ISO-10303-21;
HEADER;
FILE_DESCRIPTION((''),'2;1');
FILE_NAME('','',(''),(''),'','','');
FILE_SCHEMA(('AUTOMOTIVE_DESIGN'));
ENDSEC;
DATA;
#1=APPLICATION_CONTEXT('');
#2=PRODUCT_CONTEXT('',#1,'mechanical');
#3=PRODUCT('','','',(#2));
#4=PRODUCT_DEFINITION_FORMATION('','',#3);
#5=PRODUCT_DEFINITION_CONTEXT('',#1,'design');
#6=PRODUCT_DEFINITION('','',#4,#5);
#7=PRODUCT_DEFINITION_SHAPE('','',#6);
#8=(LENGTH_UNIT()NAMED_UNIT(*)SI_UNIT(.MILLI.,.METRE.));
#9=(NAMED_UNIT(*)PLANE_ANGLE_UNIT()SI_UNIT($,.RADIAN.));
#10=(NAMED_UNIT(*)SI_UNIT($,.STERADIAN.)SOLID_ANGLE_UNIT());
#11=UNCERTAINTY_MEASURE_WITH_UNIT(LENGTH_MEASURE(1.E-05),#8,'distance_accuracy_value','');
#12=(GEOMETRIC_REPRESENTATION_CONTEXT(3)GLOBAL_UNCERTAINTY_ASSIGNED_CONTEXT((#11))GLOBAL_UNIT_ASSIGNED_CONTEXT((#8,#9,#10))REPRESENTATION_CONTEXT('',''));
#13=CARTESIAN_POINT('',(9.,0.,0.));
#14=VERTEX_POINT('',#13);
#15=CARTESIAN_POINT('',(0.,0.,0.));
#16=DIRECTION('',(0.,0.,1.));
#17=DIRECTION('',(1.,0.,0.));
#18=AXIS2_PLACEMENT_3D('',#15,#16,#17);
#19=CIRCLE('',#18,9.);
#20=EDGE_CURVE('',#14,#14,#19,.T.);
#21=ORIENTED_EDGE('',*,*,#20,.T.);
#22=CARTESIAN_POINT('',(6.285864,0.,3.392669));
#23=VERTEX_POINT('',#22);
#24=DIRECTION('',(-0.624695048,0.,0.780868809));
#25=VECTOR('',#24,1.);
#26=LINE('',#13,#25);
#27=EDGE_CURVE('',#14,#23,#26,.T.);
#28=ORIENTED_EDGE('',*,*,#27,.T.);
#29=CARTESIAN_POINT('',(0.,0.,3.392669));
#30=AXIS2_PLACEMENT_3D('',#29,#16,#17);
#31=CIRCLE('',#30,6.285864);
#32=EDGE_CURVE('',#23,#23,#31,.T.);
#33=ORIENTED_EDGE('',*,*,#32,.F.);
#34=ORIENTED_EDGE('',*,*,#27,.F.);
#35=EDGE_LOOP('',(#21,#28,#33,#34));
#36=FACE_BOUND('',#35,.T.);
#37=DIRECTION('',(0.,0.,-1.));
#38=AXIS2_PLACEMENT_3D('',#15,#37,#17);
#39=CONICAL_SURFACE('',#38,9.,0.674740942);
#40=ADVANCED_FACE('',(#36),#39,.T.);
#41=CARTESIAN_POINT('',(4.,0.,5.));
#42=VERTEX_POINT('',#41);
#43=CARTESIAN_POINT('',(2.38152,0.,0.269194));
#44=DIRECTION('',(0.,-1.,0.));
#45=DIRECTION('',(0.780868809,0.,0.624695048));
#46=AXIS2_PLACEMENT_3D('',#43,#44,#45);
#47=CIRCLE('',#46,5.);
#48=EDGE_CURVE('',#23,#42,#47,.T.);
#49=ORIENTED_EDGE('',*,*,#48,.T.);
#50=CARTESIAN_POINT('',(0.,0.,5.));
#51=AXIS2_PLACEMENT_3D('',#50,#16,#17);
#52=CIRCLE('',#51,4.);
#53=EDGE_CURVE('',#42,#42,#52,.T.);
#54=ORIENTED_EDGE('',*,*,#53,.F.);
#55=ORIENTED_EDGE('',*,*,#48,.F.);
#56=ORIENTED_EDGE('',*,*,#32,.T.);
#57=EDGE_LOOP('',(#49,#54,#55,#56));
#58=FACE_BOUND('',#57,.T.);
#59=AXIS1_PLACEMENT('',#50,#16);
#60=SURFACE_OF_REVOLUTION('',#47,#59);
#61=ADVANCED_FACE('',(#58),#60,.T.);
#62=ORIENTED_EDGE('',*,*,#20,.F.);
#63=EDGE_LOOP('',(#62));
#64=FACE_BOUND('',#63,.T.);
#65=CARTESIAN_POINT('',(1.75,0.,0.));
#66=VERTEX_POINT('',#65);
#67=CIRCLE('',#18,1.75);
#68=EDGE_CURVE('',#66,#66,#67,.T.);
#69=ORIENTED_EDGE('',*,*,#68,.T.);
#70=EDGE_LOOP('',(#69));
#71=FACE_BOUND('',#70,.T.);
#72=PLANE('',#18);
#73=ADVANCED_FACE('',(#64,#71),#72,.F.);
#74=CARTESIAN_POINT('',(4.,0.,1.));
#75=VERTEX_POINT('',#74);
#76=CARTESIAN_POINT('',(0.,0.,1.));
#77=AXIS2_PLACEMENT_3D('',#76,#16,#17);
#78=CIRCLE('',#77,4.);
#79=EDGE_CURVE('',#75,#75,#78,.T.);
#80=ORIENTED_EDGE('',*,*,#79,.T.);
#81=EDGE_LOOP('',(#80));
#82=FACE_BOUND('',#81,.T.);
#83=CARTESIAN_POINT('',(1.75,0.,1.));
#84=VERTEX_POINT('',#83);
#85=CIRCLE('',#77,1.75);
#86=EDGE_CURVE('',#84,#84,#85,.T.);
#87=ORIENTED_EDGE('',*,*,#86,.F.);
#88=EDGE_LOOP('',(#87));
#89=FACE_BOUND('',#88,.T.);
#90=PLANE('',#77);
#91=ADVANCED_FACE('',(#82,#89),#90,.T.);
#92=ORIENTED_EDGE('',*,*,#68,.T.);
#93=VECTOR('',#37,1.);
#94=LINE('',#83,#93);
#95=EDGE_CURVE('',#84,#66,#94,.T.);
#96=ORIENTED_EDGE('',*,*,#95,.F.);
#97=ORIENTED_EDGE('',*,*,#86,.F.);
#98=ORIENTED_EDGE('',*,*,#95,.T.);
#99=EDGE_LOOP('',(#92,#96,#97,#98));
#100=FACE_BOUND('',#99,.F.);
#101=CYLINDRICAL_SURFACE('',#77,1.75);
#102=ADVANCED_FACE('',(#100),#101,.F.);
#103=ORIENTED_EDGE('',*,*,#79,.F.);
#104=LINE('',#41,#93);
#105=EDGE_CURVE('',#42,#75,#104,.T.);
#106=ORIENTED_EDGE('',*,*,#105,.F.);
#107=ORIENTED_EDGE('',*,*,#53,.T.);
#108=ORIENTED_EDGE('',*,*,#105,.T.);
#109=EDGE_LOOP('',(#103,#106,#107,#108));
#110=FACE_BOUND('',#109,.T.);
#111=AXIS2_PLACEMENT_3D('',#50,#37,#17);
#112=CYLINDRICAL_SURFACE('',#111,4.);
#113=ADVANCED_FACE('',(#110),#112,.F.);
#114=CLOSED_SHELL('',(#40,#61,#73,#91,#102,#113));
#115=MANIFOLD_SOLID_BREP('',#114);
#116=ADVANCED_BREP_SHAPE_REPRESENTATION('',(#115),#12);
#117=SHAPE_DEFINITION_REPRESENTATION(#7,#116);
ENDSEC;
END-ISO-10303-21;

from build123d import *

# Parameters (mm, degrees)
F2_R     = 1.75
F3_DEPTH = 1.001


# Not quite as in the source:
# - a fillet or chamfer that OpenCascade refuses, or shapes differently, is made with other operations: its cross-section is extruded or revolved along the edge and cut away or added


with BuildPart() as f1:
    # F0 (on Front) → F1 (revolve)
    with BuildSketch(Plane.XZ):
        Polygon((0, 1), (0, 0), (9, 0), (5, 5), (4, 5), (4, 1), align=None)
    revolve(axis=Axis((0, 0, 2.5), (0, 0, 1)))

    # F2 (on face) → F3 (cut, through all)
    with BuildSketch(Plane.XY.offset(1)):
        Circle(F2_R)
    extrude(amount=-F3_DEPTH, mode=Mode.SUBTRACT)

    # F4: fillet of radius 5 on 1 edges, made by hand

    # F4_s1 → F4_t2 (revolve, cut)
    with BuildSketch(Plane.XZ):
        with BuildLine():
            ThreePointArc((6.2858644818, 3.3926693977), (5.2575025417, 4.3592707998), (4, 5))
            Line((4, 5), (5, 5))
            Line((5, 5), (6.2858644818, 3.3926693977))
        make_face()
    revolve(axis=Axis((0, 0, 5), (0, 0, 1)), mode=Mode.SUBTRACT)


solid = f1.part
